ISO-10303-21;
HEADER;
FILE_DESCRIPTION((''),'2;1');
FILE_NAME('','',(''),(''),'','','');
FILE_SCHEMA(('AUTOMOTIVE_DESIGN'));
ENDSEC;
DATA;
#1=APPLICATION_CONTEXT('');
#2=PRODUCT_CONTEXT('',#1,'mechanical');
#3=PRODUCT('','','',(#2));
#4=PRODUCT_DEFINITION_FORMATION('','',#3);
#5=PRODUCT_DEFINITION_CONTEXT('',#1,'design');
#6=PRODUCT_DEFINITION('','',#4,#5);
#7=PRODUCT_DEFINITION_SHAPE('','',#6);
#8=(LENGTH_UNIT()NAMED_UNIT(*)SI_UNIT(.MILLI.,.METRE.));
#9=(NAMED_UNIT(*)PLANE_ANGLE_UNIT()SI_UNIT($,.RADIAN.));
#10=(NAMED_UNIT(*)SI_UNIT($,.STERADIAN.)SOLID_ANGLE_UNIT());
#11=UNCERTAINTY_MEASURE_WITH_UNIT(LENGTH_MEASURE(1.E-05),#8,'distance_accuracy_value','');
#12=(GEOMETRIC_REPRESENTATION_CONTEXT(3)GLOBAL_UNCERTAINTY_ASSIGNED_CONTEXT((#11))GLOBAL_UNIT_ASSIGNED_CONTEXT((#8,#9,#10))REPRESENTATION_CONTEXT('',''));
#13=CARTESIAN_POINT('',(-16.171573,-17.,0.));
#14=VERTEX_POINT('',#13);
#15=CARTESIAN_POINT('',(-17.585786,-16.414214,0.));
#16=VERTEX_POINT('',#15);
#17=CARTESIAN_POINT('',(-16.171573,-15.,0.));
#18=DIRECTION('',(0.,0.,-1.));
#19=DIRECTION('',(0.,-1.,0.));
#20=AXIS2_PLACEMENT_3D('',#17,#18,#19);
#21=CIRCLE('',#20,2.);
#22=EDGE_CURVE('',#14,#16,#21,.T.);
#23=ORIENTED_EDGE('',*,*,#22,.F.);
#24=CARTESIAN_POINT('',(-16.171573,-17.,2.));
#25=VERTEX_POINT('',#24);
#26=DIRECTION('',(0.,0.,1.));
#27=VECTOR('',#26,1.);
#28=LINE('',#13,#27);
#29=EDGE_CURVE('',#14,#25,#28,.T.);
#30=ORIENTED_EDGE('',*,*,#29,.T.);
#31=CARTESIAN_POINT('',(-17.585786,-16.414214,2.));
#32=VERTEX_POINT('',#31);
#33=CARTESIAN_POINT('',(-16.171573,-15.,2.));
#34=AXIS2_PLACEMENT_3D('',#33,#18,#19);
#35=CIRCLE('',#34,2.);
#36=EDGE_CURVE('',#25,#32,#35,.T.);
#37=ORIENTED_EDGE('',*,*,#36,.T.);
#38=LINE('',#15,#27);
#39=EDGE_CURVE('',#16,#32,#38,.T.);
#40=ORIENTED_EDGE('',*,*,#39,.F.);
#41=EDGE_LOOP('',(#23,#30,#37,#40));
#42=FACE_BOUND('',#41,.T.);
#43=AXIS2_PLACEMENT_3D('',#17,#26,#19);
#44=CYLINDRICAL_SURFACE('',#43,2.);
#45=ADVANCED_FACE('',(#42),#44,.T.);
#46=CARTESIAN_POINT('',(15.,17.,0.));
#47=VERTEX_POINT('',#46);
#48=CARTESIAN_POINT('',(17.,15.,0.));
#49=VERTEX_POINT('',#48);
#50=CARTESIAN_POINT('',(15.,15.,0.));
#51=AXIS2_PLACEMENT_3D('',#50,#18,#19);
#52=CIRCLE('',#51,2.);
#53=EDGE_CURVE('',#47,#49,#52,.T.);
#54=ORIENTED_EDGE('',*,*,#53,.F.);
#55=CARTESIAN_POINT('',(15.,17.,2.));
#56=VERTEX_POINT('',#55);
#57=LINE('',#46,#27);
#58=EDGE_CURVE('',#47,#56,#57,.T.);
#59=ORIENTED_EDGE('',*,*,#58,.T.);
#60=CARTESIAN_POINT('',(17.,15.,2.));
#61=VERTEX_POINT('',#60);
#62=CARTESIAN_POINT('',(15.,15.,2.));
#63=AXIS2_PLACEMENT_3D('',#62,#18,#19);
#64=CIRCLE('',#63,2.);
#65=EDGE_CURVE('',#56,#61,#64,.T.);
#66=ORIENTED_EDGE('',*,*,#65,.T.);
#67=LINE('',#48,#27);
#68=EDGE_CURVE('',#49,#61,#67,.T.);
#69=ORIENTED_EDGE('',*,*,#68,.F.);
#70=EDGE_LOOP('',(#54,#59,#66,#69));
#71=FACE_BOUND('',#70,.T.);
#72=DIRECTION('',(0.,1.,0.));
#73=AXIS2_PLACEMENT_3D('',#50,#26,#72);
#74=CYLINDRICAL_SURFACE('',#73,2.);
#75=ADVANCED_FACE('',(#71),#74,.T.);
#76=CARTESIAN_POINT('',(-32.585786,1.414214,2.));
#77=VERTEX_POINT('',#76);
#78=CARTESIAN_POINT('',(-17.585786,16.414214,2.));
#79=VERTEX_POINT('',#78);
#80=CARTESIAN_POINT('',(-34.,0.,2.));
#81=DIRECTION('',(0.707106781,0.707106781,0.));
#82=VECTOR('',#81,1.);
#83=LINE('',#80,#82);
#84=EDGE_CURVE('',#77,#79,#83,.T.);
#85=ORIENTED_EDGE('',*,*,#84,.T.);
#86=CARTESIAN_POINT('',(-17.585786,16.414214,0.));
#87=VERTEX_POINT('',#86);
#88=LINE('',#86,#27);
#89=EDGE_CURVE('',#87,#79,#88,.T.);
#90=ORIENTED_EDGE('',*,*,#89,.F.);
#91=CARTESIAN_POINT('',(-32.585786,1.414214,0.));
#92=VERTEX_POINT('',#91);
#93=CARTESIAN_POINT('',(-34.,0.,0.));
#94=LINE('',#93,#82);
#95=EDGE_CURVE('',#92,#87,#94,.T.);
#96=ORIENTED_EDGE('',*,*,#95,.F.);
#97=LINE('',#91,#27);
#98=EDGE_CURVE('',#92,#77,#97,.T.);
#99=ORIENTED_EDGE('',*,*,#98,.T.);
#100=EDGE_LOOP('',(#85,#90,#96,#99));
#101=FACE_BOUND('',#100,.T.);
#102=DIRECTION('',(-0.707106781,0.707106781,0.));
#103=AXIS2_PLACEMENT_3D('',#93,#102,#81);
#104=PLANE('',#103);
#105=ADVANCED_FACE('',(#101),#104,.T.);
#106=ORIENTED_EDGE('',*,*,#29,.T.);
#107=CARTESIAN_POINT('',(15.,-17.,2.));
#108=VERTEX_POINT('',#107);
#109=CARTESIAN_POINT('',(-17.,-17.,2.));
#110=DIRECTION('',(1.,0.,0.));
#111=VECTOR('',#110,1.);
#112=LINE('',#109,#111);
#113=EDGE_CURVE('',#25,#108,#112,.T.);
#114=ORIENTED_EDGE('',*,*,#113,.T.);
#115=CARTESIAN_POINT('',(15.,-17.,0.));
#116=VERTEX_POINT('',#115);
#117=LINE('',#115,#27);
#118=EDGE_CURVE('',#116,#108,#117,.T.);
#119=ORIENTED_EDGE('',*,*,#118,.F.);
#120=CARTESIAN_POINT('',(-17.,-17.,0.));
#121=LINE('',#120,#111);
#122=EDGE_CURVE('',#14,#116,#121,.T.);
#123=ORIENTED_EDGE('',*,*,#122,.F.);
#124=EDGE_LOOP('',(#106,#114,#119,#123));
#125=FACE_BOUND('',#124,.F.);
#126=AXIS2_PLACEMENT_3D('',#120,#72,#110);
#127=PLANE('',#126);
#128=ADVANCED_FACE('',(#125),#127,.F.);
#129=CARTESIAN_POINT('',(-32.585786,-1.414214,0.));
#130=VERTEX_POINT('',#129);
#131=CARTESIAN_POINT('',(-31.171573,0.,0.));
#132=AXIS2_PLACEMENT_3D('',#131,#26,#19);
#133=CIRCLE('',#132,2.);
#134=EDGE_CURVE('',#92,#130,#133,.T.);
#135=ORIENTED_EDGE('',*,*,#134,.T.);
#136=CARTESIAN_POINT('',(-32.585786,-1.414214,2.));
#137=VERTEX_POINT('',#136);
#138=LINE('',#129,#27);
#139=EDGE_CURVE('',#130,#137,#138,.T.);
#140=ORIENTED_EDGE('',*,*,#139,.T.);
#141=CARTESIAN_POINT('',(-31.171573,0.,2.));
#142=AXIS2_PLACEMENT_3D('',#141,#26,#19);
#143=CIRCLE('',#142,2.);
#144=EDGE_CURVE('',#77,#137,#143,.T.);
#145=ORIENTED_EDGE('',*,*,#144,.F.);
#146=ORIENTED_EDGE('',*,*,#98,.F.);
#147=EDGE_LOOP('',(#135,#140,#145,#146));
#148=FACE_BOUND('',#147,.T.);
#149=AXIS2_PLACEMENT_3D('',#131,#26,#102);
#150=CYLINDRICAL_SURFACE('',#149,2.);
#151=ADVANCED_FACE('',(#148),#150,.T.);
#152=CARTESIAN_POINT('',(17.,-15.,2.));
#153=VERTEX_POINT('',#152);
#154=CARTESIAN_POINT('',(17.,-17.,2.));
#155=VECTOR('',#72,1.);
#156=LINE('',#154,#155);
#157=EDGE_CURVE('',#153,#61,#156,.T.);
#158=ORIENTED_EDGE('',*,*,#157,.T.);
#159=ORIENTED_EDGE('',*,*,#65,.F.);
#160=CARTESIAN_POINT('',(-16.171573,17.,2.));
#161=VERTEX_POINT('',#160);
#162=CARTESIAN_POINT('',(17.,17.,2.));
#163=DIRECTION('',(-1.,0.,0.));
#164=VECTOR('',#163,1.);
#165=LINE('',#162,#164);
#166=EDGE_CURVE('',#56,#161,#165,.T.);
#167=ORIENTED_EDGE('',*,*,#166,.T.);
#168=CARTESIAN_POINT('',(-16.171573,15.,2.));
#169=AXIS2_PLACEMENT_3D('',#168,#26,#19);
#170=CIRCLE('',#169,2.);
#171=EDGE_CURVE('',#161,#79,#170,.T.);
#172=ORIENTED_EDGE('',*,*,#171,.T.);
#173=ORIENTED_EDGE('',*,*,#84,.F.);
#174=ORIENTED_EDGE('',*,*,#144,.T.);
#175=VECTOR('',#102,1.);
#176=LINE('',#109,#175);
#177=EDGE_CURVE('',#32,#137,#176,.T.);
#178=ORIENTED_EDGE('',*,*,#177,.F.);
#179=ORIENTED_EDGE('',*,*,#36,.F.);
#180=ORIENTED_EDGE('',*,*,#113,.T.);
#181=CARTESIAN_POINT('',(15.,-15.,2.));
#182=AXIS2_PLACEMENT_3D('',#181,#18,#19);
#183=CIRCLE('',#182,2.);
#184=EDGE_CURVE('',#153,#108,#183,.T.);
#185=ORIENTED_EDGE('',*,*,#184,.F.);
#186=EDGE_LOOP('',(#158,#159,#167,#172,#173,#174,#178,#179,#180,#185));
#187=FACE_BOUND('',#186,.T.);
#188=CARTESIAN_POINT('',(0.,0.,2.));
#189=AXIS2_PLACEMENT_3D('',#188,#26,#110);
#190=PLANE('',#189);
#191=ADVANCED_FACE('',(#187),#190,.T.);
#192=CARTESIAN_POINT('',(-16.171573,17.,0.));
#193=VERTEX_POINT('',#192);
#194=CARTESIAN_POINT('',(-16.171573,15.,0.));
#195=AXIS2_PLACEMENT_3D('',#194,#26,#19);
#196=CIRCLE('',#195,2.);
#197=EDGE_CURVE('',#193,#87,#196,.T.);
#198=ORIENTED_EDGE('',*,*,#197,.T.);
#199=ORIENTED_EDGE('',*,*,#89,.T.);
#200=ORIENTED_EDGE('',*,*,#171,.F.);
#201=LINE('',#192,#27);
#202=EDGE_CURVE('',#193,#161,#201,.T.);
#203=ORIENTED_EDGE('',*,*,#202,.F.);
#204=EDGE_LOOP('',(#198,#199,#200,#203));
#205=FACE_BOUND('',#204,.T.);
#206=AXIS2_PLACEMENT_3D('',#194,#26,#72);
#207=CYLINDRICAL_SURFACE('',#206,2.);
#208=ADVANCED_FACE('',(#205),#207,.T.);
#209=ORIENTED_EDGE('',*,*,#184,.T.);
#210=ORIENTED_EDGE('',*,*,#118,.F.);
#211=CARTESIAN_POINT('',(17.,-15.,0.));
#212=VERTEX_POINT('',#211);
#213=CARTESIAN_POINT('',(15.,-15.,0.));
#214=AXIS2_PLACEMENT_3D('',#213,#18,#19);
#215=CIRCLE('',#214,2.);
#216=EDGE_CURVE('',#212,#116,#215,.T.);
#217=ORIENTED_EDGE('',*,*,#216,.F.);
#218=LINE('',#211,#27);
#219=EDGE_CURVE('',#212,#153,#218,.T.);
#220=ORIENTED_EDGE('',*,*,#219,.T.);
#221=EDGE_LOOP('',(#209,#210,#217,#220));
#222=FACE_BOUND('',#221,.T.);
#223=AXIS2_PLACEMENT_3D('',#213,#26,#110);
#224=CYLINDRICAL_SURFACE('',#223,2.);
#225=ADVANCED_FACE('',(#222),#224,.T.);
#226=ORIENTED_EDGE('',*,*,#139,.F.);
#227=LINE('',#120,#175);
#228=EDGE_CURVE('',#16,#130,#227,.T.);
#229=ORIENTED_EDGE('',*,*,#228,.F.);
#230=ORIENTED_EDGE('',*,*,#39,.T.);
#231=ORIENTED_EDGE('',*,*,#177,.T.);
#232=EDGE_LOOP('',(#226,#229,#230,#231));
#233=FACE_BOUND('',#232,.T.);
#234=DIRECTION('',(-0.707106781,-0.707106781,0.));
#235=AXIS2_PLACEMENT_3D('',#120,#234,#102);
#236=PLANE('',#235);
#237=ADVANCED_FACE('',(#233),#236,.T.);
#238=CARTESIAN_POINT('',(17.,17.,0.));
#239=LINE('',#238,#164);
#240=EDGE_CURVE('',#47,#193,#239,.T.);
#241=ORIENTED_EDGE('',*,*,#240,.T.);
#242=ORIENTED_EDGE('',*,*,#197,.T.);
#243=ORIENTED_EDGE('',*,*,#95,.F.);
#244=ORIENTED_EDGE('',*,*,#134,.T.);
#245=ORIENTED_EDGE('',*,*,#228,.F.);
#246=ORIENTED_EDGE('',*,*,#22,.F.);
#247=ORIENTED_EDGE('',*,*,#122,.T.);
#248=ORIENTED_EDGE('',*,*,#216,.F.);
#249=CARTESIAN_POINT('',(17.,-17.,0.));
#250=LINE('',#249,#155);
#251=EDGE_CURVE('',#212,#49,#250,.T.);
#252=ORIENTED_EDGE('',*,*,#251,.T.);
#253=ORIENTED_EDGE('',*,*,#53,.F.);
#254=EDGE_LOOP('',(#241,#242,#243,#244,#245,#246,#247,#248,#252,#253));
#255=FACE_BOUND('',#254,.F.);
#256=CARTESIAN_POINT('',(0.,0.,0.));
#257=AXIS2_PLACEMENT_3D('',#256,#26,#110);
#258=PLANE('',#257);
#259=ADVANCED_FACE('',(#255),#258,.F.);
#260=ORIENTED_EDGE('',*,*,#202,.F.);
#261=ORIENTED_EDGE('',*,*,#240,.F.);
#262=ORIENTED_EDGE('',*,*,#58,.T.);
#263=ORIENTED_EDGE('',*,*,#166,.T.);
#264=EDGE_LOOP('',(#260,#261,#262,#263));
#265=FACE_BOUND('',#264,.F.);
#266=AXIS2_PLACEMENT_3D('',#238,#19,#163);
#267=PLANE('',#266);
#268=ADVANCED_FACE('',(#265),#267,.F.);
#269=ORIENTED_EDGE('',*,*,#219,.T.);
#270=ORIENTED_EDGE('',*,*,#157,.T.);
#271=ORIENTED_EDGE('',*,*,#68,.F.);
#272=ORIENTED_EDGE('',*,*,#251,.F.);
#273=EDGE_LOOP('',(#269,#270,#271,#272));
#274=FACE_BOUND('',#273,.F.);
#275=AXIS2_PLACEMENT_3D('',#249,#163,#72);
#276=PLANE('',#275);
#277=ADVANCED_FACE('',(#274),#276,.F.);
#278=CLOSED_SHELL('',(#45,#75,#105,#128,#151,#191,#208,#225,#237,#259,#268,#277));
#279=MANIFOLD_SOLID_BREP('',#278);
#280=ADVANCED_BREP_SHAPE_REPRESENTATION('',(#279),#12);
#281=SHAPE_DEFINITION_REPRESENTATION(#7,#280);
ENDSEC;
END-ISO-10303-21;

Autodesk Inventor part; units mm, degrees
ref_plane "YZ Plane" through (0, 0, 0) normal (1, 0, 0) x (0, 1, 0)
ref_plane "XZ Plane" through (0, 0, 0) normal (0, 1, 0) x (-1, 0, 0)
ref_plane "XY Plane" through (0, 0, 0) normal (0, 0, 1) x (1, 0, 0)
sketch "Sketch1" plane through (0, 0, 0) normal (0, 0, 1) x (1, 0, 0)
  line L0 (-17, -17) -> (17, -17)
  line L1 (17, -17) -> (17, 17)
  line L2 (17, 17) -> (-17, 17)
  line L3 (-17, 17) -> (-17, -17)
  line L4 (-17, -17) -> (17, 17) construction
  line L5 (17, -17) -> (-17, 17) construction
  line L6 (-17, -17) -> (-34, 0)
  line L7 (-34, 0) -> (-17, 17)
  point P0 (0, 0)
  point P1 (-17, 0)
  dimension "d154" = 34
  dimension "d155" = 34
  dimension "d180" = 17
extrude "Plate5" add sketch "Sketch1" along normal blind 2
fillet "Corner Round1" radius 2 5 edges at (17, 17, 1) (-17, 17, 1) (-17, -17, 1) (17, -17, 1) (-34, 0, 1)
properties part number "PRS 8666 FDS CUP 1_940" material "Stainless Steel"
